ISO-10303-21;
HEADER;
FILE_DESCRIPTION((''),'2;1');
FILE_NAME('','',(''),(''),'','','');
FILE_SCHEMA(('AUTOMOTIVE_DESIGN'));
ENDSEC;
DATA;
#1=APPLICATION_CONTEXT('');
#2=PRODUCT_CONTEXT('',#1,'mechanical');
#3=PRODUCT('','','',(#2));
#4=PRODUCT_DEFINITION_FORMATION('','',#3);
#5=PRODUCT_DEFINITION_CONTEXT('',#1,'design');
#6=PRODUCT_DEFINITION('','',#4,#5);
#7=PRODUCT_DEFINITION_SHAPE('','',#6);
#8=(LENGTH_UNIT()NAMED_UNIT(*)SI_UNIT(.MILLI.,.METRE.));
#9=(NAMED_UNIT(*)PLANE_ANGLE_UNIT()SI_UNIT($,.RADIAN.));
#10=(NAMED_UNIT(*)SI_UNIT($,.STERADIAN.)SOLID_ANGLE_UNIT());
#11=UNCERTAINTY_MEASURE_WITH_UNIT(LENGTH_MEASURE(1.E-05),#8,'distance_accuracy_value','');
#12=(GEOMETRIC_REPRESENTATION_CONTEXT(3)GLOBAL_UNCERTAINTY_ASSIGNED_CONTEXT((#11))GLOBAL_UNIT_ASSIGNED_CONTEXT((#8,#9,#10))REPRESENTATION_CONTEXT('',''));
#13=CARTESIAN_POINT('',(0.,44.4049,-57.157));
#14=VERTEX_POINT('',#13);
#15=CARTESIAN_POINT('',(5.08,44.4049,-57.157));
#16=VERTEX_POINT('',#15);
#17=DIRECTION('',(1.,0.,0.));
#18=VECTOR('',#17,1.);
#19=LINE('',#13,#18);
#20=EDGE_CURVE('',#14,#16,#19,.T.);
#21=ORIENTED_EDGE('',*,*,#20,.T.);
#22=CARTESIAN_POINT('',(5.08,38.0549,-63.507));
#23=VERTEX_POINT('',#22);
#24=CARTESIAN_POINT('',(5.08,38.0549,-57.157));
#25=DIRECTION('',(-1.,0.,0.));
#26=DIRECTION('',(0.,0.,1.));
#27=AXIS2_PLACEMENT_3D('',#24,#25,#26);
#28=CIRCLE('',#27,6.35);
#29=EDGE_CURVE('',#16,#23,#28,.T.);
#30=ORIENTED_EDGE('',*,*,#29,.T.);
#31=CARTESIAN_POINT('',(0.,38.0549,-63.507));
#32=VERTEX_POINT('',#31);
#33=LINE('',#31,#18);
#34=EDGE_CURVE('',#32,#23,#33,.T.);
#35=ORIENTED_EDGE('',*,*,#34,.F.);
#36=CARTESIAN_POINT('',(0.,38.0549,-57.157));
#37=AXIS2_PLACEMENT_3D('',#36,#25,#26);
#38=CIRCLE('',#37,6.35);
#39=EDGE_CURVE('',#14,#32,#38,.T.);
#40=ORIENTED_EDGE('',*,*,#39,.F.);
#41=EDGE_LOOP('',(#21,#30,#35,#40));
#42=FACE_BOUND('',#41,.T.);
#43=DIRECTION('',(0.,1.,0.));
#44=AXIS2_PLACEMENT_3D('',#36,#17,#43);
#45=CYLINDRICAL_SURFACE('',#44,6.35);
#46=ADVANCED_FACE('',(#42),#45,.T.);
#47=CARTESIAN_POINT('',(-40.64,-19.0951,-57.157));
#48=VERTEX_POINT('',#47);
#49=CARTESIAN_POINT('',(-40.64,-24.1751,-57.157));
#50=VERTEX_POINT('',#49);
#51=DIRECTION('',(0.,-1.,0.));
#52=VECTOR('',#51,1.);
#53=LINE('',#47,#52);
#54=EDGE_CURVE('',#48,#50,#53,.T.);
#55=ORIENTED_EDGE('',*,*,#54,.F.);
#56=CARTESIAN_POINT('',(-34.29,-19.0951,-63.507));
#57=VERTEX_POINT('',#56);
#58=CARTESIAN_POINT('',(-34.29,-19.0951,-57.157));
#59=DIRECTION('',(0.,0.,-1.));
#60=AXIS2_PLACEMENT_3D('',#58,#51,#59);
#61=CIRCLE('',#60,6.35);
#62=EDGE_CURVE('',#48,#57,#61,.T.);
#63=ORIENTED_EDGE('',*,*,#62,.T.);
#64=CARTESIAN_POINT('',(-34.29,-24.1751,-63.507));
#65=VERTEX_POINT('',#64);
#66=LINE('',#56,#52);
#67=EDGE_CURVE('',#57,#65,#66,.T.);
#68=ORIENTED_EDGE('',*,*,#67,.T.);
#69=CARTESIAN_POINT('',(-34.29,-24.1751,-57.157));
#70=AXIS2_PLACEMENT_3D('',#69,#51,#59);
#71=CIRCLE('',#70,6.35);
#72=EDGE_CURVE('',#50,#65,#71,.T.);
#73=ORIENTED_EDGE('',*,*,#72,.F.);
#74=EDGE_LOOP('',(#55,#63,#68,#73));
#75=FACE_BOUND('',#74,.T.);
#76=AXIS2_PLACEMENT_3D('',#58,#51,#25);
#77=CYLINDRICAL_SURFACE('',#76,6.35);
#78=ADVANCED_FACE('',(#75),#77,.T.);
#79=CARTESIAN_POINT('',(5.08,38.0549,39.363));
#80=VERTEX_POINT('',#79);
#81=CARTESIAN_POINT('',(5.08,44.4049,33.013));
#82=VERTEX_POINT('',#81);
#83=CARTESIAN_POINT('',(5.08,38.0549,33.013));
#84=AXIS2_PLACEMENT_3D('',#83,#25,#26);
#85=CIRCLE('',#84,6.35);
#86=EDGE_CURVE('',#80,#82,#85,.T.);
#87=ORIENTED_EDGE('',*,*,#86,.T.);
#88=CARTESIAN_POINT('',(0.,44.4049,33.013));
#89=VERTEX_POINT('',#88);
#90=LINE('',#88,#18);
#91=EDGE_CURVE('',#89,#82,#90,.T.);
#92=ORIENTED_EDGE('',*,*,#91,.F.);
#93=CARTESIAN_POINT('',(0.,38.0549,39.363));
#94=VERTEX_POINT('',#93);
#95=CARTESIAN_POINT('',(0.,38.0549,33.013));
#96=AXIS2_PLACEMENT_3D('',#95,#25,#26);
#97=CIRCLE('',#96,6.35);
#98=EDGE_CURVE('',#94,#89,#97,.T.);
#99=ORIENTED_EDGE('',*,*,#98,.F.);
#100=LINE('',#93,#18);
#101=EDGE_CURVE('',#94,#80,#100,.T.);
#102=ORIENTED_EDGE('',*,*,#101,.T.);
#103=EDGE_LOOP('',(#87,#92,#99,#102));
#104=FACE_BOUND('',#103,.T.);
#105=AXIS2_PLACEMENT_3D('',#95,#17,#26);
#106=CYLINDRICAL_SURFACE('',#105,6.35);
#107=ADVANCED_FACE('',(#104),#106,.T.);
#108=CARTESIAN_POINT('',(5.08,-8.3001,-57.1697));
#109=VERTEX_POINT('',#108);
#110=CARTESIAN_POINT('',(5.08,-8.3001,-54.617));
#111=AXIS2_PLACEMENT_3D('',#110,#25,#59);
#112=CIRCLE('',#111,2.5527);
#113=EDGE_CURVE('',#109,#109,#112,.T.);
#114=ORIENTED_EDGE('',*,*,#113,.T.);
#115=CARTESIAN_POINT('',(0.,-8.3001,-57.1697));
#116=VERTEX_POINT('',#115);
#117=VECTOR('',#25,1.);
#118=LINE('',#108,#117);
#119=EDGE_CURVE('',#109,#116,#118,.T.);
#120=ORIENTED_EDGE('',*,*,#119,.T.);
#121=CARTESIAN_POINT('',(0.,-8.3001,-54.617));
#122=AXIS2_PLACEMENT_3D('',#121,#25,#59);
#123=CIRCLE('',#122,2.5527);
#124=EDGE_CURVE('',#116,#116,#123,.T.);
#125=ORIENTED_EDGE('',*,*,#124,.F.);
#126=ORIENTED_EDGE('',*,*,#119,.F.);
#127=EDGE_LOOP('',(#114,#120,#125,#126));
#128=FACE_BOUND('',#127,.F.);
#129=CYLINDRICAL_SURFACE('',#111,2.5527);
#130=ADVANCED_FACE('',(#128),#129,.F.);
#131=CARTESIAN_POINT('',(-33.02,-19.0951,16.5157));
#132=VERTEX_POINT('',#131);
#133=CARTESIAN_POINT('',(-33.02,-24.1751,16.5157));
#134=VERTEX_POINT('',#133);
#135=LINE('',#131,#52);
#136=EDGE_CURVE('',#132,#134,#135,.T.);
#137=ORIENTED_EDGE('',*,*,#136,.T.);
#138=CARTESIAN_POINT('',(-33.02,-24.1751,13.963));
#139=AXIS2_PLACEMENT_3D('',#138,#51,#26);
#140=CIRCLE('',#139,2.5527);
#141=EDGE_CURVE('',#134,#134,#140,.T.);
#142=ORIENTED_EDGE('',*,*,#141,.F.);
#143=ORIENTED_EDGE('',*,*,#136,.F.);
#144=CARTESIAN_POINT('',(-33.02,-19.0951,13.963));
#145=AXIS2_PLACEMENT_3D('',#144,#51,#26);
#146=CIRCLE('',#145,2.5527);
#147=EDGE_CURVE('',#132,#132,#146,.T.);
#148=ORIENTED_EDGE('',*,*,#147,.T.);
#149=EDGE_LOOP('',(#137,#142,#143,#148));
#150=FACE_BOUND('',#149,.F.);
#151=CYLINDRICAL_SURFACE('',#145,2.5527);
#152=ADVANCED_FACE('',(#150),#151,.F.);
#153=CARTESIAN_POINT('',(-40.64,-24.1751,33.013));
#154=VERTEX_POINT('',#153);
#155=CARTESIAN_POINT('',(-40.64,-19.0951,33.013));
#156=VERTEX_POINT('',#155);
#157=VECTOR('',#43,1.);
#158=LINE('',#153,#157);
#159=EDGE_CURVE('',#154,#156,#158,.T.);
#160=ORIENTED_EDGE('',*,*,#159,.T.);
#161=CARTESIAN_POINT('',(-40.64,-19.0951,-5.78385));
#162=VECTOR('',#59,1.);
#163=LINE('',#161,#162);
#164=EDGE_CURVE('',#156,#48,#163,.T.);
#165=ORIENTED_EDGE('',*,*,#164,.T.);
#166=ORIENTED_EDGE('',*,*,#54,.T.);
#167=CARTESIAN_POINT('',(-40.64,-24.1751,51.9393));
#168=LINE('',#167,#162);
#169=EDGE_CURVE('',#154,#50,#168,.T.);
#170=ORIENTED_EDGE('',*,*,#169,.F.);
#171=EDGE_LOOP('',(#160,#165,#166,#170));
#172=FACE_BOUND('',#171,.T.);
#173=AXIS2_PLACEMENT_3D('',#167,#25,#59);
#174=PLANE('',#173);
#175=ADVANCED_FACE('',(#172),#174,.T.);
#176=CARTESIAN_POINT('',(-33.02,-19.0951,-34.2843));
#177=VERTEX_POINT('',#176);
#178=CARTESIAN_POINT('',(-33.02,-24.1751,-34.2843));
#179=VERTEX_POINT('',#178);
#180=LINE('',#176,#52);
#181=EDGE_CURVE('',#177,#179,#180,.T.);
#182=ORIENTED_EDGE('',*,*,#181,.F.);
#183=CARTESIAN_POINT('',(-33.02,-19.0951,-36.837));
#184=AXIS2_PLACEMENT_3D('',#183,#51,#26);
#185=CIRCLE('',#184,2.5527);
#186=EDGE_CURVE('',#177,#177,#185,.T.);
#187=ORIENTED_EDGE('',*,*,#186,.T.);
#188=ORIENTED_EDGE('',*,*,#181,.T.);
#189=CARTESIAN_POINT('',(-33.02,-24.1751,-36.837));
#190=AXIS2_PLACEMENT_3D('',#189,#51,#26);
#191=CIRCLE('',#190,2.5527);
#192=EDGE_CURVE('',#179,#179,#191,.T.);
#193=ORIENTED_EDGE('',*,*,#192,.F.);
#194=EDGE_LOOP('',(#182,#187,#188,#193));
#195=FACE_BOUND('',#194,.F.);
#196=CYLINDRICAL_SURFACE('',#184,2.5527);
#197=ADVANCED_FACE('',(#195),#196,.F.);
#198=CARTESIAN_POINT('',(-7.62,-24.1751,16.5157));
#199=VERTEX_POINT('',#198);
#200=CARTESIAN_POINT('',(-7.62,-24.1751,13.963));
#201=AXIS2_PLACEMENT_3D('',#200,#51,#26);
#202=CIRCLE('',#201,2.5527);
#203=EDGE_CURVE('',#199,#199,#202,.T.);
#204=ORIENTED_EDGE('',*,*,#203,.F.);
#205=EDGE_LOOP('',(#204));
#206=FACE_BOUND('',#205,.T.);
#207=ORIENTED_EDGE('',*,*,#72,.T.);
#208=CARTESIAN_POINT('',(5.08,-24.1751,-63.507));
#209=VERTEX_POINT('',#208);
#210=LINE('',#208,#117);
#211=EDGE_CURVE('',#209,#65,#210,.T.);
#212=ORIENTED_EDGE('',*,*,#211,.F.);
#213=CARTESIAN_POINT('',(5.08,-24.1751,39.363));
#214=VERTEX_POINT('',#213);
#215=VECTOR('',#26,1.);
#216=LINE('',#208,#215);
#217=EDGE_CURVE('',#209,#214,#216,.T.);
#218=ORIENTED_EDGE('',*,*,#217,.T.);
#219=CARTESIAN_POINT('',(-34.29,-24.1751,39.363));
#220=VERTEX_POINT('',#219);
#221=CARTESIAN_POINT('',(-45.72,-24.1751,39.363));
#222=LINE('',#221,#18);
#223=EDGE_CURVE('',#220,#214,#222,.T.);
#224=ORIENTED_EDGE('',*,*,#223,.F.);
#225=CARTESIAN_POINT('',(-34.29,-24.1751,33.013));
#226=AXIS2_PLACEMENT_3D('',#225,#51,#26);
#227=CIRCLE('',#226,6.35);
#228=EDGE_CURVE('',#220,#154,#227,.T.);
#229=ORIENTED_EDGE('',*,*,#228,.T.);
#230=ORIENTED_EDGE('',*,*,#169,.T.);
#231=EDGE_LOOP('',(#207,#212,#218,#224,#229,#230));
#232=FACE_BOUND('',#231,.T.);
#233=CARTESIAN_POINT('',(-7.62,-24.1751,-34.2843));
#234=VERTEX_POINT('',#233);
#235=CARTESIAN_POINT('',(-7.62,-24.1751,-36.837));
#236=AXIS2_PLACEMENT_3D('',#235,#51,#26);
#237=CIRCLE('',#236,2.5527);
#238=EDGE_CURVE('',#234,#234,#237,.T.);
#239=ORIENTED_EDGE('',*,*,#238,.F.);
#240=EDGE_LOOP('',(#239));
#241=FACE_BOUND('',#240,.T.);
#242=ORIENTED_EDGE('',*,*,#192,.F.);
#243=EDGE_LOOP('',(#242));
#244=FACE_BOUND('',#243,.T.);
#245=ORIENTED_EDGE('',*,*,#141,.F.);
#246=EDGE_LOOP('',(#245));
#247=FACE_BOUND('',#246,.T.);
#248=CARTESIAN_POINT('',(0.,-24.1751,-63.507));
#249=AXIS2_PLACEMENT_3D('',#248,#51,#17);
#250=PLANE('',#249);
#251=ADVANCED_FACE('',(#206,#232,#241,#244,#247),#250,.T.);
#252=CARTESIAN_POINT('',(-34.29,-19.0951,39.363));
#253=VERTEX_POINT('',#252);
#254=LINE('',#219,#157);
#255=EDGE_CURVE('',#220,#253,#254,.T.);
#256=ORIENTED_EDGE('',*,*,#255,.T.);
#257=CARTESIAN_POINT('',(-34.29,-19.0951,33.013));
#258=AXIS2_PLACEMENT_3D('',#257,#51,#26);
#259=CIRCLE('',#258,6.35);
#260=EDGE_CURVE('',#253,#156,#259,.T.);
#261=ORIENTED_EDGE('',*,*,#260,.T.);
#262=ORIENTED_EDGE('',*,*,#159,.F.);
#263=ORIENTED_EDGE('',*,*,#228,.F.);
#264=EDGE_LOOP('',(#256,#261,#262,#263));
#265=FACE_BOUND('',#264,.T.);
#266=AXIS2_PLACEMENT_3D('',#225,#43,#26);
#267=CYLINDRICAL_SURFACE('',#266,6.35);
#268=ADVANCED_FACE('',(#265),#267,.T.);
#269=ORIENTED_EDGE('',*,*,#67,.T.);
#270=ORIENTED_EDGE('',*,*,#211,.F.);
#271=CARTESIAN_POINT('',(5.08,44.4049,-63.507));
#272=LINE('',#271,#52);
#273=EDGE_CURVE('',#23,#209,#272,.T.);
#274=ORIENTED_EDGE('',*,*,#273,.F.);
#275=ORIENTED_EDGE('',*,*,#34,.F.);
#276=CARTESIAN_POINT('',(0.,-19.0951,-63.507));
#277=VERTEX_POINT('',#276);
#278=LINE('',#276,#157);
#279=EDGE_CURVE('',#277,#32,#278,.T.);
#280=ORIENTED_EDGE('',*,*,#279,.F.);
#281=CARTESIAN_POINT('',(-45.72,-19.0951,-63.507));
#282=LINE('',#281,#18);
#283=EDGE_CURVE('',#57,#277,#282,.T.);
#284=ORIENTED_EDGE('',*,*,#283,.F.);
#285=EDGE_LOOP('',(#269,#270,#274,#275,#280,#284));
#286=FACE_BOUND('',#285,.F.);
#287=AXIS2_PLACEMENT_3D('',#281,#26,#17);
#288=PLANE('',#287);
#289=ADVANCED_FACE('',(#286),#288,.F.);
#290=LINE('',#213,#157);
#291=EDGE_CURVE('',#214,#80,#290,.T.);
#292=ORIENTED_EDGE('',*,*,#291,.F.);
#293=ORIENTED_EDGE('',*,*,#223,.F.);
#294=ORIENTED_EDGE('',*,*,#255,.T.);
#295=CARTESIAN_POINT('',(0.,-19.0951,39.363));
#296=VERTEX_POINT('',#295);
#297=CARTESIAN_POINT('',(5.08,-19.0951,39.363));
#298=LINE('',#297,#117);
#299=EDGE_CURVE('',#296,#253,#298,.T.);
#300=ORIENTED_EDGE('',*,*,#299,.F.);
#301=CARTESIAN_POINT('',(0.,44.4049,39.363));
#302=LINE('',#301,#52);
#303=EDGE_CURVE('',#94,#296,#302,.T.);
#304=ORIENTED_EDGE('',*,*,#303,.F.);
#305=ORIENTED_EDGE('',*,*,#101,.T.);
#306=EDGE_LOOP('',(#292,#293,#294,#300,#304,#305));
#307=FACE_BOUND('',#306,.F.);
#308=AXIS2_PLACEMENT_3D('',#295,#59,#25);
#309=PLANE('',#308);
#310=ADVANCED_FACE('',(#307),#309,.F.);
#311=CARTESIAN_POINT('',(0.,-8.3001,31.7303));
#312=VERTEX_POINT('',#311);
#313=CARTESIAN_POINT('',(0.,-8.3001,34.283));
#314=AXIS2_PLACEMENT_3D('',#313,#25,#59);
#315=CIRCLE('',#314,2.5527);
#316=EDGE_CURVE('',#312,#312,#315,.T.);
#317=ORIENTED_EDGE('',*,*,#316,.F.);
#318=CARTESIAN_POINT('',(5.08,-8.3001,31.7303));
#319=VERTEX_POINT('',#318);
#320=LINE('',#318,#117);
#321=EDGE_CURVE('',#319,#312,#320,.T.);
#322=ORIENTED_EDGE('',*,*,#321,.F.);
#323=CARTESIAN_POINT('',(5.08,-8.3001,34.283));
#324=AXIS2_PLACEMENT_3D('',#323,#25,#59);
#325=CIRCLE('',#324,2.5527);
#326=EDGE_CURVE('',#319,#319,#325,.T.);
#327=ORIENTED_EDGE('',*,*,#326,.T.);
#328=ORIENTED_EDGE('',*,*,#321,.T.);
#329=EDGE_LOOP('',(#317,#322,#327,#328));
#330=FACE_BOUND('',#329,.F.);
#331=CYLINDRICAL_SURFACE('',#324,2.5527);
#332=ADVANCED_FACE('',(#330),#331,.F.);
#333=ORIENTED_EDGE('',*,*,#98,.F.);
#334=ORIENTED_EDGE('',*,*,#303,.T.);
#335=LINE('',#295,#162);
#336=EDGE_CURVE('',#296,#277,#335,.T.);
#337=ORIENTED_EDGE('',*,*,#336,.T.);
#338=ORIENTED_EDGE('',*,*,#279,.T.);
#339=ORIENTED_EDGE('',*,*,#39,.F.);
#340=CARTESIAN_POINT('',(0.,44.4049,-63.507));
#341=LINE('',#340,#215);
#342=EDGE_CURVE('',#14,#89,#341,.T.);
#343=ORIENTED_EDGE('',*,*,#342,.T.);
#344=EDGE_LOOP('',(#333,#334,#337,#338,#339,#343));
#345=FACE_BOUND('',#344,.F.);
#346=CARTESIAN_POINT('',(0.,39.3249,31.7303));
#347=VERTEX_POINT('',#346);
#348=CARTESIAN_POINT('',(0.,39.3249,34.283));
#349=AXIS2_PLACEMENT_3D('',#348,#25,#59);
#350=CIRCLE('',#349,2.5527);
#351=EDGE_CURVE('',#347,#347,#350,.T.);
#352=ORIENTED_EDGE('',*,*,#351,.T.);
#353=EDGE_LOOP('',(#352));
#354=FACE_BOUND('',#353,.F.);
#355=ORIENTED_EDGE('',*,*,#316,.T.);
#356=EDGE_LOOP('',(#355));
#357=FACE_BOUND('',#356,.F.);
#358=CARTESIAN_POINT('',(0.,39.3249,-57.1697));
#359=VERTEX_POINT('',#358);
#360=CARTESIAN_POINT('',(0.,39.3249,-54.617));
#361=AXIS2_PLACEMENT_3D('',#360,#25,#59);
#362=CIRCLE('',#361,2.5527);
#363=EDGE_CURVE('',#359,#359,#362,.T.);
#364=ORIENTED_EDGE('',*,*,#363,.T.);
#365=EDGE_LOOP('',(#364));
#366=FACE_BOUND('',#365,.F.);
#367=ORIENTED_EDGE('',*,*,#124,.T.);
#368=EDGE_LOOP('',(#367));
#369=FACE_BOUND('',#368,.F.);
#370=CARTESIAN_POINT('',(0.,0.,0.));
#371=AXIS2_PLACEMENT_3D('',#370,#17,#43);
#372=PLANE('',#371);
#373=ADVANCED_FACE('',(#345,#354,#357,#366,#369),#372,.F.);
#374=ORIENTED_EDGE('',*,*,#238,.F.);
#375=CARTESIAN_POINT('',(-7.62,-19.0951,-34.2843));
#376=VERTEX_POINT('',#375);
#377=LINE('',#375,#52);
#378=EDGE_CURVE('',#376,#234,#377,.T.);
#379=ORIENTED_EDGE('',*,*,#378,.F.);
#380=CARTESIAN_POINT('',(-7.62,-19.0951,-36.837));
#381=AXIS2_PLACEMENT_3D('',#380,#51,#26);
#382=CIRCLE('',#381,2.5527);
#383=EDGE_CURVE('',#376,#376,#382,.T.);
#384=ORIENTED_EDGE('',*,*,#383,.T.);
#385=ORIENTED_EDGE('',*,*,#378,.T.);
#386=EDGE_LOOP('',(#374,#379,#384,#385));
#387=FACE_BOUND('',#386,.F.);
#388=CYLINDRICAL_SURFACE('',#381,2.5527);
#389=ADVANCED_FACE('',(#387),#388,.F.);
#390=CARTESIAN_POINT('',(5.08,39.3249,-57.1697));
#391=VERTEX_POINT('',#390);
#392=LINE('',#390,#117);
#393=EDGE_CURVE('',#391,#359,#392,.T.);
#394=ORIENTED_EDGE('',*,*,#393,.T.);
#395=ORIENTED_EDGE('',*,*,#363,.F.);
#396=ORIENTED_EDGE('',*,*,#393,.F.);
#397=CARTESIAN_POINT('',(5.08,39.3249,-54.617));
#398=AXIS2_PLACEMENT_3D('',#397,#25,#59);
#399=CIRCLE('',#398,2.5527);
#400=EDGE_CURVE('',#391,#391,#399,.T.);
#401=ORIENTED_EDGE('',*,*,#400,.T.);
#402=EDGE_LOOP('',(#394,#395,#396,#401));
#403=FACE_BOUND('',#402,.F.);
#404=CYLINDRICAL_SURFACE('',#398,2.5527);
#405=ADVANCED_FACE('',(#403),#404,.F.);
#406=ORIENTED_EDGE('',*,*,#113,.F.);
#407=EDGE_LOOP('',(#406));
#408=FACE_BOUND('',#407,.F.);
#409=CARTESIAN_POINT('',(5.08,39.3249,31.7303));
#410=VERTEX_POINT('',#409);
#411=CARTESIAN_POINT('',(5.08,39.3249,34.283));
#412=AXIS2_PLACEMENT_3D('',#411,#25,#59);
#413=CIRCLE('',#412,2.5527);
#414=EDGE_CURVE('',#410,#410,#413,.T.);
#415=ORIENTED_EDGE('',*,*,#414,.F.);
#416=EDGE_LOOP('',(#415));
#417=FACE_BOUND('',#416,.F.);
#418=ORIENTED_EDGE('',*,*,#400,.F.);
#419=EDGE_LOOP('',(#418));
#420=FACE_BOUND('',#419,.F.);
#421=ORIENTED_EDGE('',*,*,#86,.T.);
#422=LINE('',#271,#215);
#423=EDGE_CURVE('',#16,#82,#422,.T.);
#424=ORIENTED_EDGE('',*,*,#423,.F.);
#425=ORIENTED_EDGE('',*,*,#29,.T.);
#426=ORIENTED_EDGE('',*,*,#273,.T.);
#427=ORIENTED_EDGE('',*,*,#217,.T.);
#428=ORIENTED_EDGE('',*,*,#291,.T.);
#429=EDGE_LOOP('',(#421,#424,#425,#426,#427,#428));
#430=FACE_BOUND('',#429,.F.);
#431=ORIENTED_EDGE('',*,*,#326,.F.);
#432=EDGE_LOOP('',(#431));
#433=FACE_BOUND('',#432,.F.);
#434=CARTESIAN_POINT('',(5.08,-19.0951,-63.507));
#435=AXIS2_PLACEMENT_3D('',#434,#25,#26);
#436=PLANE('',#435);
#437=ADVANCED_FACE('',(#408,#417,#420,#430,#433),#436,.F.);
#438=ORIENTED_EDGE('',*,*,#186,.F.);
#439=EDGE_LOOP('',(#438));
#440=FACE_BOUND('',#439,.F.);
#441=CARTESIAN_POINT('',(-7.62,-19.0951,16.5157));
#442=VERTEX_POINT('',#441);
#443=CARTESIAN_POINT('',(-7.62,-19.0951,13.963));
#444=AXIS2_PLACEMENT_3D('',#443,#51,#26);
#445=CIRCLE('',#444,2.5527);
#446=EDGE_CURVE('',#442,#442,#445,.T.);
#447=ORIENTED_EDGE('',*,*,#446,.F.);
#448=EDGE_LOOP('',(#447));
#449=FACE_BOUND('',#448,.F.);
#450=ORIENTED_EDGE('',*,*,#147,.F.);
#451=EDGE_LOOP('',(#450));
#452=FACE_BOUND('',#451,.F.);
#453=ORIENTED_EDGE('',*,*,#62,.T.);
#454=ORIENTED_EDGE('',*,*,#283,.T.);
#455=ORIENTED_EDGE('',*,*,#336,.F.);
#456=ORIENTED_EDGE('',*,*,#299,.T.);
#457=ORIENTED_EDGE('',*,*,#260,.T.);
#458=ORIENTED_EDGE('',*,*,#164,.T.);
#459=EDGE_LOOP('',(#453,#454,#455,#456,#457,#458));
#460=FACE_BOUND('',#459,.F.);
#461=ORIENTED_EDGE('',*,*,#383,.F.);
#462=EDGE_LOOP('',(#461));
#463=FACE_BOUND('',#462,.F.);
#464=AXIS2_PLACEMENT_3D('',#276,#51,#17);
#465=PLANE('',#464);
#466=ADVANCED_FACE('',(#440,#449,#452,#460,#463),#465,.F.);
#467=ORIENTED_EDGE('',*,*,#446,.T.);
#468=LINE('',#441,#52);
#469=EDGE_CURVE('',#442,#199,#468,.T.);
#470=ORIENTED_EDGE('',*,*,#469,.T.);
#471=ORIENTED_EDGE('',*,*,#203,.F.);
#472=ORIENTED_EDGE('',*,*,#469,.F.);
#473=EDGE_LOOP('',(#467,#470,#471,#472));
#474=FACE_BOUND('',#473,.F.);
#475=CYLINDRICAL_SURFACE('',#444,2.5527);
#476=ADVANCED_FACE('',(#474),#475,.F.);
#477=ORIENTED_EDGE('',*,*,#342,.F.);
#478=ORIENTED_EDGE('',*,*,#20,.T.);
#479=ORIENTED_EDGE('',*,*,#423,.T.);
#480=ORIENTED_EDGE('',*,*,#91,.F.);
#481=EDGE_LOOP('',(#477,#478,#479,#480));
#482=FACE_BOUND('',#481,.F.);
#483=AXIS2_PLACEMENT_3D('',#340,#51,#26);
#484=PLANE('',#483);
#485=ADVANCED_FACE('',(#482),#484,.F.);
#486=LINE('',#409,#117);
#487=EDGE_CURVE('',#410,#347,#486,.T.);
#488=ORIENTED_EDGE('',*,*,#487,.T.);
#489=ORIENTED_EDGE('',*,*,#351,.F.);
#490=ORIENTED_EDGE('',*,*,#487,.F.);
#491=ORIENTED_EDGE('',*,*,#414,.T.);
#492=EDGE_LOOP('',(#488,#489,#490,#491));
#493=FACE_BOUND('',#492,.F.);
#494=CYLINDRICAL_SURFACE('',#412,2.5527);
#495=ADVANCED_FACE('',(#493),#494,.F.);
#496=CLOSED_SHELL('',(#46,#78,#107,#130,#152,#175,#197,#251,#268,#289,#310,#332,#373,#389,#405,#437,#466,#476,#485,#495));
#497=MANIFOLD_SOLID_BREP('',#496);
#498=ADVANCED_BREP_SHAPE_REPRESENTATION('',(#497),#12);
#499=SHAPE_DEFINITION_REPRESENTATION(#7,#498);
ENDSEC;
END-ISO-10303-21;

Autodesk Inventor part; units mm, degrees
ref_plane "YZ Plane" through (0, 0, 0) normal (1, 0, 0) x (0, 1, 0)
ref_plane "XZ Plane" through (0, 0, 0) normal (0, 1, 0) x (-1, 0, 0)
ref_plane "XY Plane" through (0, 0, 0) normal (0, 0, 1) x (1, 0, 0)
sketch "Sketch1" plane through (0, 0, 0) normal (1, 0, 0) x (0, 1, 0)
  line L0 (44.4049, 39.363) -> (-19.0951, 39.363)
  line L1 (-19.0951, 39.363) -> (-19.0951, -63.507)
  line L2 (-19.0951, -63.507) -> (44.4049, -63.507)
  line L3 (44.4049, -63.507) -> (44.4049, 39.363)
  point P0 (0, 0)
  dimension "d0" = 102.87
  dimension "d1" = 63.5
extrude "Extrusion1" add sketch "Sketch1" along normal blind 5.08
sketch "Sketch2" plane through (5.08, 0, 0) normal (1, 0, 0) x (0, 0, -1)
  line L0 (63.507, 44.4049) -> (-39.363, 44.4049) projected
  line L1 (-39.363, 44.4049) -> (-39.363, -19.0951) projected
  point P0 (0, 0)
  point P1 (-34.283, 39.3249)
  point P2 (54.617, 39.3249)
  point P3 (54.617, -8.3001)
  point P4 (-34.283, -8.3001)
  dimension "d4" = 0
  dimension "d5" = 0
  dimension "d6" = 0
  dimension "d7" = 0
  dimension "d8" = 88.9
  dimension "d9" = 5.08
  dimension "d10" = 5.08
  dimension "d11" = 47.625
hole "Hole1" at (5.08, 39.3249, 34.283) at (5.08, 39.3249, -54.617) at (5.08, -8.3001, -54.617) at (5.08, -8.3001, 34.283) direction (-1, 0, 0) diameter 5.1054 end through all clearance for "Flat Head Machine Screw (82)" size "#10" standard "Ansi Unified Screw Threads"
sketch "Sketch3" plane through (0, -19.0951, -63.507) normal (0, -1, 0) x (1, 0, 0)
  line L0 (-45.72, 0) -> (5.08, 0)
  line L1 (5.08, 0) -> (5.08, 102.87)
  line L2 (5.08, 102.87) -> (-45.72, 102.87)
  line L3 (-45.72, 102.87) -> (-45.72, 0)
  line L4 (5.08, 102.87) -> (5.08, 0) projected
  line L5 (0, 0) -> (5.08, 0) projected
  line L6 (0, 102.87) -> (5.08, 102.87) projected
  point P0 (0, 63.507)
  dimension "d19" = 0
  dimension "d20" = 0
  dimension "d21" = 0
  dimension "d22" = 50.8
extrude "Extrusion2" add sketch "Sketch3" along normal blind 5.08
sketch "Sketch4" plane through (0, -19.0951, -63.507) normal (0, 1, 0) x (1, 0, 0)
  line L0 (0, -102.87) -> (-45.72, -102.87) projected
  line L1 (-45.72, 0) -> (0, 0) projected
  line L2 (5.08, 0) -> (5.08, -102.87) projected
  point P0 (0, -63.507)
  point P1 (-7.62, -77.47)
  point P2 (-33.02, -77.47)
  point P3 (-33.02, -26.67)
  point P4 (-7.62, -26.67)
  dimension "d25" = 0
  dimension "d26" = 0
  dimension "d27" = 0
  dimension "d28" = 0
  dimension "d29" = 25.4
  dimension "d30" = 50.8
  dimension "d31" = 25.4
  dimension "d32" = 26.67
  dimension "d33" = 12.7
hole "Hole2" at (-7.62, -19.0951, 13.963) at (-33.02, -19.0951, 13.963) at (-33.02, -19.0951, -36.837) at (-7.62, -19.0951, -36.837) direction (0, -1, 0) diameter 5.1054 end through all clearance for "Flat Head Machine Screw (82)" size "#10" standard "Ansi Unified Screw Threads"
sketch "Sketch5" plane through (0, -24.1751, -63.507) normal (0, -1, 0) x (1, 0, 0)
  line L0 (-91.5665, 115.4463) -> (-40.64, 115.4463)
  line L1 (-40.64, 115.4463) -> (-40.64, -11.0997)
  line L2 (-40.64, -11.0997) -> (-91.5665, -11.0997)
  line L3 (-91.5665, -11.0997) -> (-91.5665, 115.4463)
  line L4 (-45.72, 102.87) -> (-45.72, 0) projected
  point P0 (0, 63.507)
  dimension "d41" = 5.08
extrude "Extrusion3" cut sketch "Sketch5" against normal blind 25.4
fillet "Fillet1" radius 6.35 4 edges at (-40.64, -21.6351, -63.507) (-40.64, -21.6351, 39.363) (2.54, 44.4049, 39.363) (2.54, 44.4049, -63.507)
properties part number "LimeLight90"
